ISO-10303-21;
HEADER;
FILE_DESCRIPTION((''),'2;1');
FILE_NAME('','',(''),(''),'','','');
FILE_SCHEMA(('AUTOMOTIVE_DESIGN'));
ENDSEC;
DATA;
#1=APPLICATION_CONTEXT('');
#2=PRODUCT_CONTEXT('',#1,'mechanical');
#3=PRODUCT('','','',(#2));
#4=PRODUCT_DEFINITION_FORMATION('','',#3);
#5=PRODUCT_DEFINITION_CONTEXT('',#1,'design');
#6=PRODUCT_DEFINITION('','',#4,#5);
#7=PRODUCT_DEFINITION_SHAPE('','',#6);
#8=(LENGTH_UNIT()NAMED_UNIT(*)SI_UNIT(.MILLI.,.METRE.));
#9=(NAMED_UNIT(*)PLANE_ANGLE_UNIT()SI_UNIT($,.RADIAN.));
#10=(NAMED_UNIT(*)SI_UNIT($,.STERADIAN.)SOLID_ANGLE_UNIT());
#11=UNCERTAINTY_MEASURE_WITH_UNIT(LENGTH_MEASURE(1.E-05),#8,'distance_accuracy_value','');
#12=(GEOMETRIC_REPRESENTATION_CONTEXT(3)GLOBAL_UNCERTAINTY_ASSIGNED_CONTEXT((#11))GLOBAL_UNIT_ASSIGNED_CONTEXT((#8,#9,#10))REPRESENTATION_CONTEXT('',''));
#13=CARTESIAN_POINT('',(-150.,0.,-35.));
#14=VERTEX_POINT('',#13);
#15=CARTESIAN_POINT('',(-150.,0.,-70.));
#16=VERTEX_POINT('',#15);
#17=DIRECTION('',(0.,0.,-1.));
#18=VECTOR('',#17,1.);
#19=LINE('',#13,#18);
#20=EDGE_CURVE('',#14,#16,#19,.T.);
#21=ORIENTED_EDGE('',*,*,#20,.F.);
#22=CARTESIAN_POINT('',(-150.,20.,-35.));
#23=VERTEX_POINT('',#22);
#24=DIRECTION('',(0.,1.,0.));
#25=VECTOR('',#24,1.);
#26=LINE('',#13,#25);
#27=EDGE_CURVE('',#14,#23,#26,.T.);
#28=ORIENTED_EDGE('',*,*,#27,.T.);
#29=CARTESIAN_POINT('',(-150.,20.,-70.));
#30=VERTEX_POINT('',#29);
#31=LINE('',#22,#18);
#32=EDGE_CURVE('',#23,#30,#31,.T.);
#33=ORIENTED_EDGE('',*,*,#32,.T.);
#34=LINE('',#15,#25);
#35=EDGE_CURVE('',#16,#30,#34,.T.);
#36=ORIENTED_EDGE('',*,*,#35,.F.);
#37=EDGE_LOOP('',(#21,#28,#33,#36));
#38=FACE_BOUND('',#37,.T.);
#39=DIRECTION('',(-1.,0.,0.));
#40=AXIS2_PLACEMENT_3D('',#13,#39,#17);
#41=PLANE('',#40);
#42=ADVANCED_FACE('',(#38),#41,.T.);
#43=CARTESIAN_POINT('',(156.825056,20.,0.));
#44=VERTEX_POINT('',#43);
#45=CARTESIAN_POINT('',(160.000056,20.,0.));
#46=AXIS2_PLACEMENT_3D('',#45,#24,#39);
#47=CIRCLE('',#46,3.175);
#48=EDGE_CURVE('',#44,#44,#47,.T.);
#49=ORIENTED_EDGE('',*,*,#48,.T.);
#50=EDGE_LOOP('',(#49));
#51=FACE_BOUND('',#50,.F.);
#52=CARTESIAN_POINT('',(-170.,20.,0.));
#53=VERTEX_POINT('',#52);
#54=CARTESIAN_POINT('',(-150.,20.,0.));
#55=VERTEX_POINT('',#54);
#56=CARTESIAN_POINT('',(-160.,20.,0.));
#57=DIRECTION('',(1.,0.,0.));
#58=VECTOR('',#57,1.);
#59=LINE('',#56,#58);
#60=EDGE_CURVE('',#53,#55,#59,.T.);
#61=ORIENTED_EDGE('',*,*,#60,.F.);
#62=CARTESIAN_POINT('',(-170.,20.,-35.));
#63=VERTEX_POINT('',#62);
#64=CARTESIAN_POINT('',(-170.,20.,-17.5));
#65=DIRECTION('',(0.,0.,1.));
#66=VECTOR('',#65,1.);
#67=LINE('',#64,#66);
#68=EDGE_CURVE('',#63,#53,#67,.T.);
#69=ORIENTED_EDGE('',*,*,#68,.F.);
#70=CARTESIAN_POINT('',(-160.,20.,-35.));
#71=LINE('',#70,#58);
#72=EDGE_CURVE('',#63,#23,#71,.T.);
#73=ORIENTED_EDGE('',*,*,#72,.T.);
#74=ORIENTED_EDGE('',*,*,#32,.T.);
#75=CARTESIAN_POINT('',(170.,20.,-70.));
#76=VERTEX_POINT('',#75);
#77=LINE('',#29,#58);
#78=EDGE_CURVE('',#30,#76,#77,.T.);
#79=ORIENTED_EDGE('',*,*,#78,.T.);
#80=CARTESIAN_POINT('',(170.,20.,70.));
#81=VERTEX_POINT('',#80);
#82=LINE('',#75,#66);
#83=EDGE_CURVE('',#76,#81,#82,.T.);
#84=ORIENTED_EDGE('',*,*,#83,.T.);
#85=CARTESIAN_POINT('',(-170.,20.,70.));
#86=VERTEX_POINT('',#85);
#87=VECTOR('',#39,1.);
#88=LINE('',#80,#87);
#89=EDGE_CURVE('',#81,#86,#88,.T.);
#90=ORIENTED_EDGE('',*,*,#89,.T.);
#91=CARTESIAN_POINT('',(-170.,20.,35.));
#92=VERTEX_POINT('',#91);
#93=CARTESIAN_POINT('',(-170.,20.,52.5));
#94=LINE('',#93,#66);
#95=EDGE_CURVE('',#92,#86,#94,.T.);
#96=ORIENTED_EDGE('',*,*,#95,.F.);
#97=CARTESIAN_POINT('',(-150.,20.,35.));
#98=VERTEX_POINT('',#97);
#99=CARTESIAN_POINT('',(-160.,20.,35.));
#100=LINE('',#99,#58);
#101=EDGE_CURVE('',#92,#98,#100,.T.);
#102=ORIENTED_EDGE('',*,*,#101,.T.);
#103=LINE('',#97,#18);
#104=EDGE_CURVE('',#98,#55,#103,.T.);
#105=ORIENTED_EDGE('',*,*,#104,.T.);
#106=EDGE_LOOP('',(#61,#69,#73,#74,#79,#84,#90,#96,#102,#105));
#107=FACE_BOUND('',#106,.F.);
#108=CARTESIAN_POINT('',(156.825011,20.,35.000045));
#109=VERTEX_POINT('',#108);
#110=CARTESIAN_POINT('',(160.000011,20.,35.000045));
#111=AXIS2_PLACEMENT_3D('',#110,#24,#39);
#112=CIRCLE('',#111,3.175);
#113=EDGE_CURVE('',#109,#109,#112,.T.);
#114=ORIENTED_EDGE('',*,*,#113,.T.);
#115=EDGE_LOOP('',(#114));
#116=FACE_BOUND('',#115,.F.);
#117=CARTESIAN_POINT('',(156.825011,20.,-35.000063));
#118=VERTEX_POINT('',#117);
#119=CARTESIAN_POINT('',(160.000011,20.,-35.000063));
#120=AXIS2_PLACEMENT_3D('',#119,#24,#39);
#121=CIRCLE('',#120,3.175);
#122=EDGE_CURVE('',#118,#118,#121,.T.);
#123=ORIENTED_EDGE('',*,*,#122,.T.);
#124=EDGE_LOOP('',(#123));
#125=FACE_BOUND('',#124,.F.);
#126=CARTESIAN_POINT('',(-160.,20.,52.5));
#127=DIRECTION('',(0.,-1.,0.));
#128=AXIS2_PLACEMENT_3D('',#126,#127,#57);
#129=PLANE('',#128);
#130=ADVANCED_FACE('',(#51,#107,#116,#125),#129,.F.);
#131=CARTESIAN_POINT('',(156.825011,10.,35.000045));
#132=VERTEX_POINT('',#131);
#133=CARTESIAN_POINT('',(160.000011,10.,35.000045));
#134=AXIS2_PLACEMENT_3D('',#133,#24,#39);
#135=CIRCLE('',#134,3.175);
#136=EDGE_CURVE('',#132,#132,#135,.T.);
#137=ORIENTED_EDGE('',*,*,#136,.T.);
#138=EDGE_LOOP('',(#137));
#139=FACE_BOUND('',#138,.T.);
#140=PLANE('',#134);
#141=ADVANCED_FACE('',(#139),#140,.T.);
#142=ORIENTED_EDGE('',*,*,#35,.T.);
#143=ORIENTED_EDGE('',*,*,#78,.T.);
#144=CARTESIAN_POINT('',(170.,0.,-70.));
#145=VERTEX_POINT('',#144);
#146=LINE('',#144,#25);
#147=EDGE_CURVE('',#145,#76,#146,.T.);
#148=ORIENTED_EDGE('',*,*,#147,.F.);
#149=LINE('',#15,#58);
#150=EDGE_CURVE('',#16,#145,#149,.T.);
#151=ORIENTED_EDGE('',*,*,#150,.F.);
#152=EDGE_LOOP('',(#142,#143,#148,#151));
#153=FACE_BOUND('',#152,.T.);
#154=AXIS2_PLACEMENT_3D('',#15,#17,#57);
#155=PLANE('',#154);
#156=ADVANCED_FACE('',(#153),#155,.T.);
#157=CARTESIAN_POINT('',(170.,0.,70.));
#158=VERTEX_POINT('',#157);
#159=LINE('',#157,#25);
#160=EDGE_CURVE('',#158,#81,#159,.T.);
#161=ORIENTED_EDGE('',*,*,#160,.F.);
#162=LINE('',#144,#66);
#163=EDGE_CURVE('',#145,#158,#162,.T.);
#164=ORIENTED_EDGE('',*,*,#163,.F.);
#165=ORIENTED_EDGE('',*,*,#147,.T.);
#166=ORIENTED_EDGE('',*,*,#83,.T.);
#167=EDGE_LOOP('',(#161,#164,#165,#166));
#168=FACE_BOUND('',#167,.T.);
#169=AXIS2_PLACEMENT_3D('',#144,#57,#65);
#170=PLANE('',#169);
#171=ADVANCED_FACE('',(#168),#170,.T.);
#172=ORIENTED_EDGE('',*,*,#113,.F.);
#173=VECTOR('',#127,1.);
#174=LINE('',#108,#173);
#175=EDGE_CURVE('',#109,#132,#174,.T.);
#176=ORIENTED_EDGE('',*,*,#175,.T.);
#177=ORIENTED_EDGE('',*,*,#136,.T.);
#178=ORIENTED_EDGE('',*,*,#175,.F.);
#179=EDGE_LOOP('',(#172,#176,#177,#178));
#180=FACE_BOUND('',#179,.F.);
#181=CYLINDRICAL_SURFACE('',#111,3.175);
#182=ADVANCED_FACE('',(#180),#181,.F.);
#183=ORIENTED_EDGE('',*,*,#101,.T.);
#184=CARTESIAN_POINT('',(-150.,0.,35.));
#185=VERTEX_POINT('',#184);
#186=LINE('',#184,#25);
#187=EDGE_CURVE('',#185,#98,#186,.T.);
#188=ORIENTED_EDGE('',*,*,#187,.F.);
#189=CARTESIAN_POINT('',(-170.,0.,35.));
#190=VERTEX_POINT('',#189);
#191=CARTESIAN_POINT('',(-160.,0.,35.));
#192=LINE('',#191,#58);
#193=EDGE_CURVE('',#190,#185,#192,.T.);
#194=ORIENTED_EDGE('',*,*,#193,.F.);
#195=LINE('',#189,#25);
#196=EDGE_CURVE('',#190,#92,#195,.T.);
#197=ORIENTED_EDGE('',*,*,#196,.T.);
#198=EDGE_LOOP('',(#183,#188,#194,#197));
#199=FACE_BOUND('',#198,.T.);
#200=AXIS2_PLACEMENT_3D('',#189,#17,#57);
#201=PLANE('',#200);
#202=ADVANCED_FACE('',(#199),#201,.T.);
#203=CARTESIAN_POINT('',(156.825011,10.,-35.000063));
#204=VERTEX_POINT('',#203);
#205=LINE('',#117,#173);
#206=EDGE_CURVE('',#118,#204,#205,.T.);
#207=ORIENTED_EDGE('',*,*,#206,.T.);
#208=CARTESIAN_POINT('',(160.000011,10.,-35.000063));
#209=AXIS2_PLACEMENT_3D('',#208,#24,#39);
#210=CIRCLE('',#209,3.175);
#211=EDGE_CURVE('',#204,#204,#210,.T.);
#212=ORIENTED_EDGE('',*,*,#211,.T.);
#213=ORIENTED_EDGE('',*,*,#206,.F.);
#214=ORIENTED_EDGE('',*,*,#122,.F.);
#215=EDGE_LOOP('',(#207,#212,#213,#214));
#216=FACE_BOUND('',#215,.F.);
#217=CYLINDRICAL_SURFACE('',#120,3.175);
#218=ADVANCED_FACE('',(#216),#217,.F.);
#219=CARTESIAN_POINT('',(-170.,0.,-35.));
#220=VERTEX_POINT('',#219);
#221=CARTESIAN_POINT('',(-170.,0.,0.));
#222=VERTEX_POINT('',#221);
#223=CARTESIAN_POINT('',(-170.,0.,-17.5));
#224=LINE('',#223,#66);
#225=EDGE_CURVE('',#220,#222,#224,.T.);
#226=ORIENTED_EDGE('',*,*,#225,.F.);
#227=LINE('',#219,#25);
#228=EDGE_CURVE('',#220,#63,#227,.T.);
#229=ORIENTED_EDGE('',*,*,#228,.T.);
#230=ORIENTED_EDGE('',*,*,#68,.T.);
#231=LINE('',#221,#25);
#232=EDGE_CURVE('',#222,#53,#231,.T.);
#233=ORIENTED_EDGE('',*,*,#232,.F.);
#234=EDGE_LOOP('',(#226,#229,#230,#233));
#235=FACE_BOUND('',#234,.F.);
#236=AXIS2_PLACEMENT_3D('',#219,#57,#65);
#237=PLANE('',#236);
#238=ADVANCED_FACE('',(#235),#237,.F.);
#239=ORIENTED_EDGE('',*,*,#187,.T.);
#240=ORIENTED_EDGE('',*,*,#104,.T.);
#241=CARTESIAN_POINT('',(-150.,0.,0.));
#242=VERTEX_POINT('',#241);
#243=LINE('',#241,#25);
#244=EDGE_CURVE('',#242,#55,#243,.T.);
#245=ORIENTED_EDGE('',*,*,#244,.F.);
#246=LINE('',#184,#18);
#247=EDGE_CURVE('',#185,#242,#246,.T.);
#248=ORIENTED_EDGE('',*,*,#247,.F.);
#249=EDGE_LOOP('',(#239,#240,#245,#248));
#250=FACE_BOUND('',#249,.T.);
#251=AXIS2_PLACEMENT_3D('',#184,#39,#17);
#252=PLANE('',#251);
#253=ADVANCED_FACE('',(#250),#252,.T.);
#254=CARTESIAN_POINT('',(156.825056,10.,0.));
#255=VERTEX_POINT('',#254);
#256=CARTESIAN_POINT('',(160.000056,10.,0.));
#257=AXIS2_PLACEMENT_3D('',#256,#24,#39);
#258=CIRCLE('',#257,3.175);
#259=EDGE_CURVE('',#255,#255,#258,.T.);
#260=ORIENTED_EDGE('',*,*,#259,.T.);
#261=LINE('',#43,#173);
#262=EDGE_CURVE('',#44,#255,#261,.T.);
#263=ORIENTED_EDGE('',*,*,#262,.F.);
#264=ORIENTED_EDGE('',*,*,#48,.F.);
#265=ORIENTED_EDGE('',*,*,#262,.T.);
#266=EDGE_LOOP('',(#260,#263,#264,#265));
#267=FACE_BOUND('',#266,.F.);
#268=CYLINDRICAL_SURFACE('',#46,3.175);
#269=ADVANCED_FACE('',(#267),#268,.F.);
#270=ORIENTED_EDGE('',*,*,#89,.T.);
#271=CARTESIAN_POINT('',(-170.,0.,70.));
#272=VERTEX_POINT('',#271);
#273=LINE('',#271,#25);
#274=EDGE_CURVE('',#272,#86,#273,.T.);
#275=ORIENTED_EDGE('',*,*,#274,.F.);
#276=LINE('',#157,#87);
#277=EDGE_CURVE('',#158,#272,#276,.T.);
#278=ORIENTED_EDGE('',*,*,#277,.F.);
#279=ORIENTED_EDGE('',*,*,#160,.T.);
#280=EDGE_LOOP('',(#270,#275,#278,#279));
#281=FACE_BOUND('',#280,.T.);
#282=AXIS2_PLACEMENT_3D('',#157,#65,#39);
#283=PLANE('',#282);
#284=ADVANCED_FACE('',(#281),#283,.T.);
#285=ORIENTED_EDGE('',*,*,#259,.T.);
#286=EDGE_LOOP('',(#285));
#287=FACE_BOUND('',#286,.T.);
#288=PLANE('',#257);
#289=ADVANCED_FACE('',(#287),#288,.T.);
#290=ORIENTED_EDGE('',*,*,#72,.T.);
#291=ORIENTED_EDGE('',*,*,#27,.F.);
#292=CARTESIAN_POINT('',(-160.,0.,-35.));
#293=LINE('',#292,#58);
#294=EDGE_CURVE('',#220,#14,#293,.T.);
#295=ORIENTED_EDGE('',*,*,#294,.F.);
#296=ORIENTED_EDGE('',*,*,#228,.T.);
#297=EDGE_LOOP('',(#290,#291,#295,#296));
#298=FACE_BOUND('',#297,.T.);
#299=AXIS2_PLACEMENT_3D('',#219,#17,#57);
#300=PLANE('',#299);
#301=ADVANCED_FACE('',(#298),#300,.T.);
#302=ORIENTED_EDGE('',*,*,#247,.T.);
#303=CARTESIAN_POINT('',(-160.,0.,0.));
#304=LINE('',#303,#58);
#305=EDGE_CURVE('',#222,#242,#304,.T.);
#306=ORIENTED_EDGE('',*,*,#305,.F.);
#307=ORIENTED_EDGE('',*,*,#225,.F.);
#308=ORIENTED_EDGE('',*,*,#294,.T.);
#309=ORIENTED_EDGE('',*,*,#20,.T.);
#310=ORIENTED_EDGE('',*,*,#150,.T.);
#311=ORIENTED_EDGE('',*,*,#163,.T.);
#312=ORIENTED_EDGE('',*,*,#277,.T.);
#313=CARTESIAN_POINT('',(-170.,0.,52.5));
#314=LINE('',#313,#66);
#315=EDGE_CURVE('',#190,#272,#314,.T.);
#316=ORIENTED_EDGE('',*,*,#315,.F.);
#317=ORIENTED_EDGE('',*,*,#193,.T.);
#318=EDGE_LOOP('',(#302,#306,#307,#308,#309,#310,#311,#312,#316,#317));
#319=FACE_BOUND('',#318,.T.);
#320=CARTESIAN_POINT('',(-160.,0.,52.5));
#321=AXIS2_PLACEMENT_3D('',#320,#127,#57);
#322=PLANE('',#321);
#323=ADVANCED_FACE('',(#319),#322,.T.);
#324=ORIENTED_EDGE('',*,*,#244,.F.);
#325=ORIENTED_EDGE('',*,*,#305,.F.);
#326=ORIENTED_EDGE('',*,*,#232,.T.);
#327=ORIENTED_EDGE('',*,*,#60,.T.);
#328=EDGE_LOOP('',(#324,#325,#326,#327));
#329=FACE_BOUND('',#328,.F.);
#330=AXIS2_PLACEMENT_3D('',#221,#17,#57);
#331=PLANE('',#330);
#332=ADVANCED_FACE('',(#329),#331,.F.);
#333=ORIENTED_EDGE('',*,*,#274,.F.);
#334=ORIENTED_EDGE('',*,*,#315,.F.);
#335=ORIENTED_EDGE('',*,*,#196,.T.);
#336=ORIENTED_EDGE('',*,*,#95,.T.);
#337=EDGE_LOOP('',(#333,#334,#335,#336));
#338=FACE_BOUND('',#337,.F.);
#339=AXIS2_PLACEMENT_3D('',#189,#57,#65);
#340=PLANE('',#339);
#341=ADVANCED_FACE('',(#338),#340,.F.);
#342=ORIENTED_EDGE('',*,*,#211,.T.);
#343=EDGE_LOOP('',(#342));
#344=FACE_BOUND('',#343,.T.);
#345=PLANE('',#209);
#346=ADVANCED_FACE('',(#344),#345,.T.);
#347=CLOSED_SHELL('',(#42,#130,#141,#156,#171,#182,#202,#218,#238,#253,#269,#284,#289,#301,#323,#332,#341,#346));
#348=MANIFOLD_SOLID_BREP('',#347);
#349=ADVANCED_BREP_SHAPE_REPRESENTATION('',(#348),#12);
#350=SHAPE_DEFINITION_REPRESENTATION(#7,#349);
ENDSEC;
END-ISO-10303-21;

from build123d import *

# Parameters (mm, degrees)
F0_W     = 20
F0_H     = 35
F1_DEPTH = 20
F3_R     = 3.175
F4_DEPTH = 10


# Not quite as in the source:
# - a feature names something its author has since deleted; it is built from what else it names


with BuildPart() as f1:
    # F0 (on Front) → F1 (new body)
    with BuildSketch(Plane.XZ):
        with Locations((-160, 52.5)):
            Rectangle(F0_W, F0_H)
        with Locations((-160, -17.5)):
            Rectangle(F0_W, F0_H)
        Polygon((170, -70), (170, 70), (150, 70), (-150, 70), (-150, 35), (-150, 0), (-150, -35), (-150, -70), (150, -70), align=None)
    extrude(amount=-F1_DEPTH)

    # F3 (on face) → F4 (cut)
    with BuildSketch(Plane(origin=(0, 20, 0), x_dir=(-1, 0, 0), z_dir=(0, 1, 0))):
        with Locations((-160.0000113249, 35.0000448525)):
            Circle(F3_R)
        with Locations((-160.0000560284, 0)):
            Circle(F3_R)
        with Locations((-160.0000113249, -35.0000634789)):
            Circle(F3_R)
    extrude(amount=-F4_DEPTH, mode=Mode.SUBTRACT)


solid = f1.part
